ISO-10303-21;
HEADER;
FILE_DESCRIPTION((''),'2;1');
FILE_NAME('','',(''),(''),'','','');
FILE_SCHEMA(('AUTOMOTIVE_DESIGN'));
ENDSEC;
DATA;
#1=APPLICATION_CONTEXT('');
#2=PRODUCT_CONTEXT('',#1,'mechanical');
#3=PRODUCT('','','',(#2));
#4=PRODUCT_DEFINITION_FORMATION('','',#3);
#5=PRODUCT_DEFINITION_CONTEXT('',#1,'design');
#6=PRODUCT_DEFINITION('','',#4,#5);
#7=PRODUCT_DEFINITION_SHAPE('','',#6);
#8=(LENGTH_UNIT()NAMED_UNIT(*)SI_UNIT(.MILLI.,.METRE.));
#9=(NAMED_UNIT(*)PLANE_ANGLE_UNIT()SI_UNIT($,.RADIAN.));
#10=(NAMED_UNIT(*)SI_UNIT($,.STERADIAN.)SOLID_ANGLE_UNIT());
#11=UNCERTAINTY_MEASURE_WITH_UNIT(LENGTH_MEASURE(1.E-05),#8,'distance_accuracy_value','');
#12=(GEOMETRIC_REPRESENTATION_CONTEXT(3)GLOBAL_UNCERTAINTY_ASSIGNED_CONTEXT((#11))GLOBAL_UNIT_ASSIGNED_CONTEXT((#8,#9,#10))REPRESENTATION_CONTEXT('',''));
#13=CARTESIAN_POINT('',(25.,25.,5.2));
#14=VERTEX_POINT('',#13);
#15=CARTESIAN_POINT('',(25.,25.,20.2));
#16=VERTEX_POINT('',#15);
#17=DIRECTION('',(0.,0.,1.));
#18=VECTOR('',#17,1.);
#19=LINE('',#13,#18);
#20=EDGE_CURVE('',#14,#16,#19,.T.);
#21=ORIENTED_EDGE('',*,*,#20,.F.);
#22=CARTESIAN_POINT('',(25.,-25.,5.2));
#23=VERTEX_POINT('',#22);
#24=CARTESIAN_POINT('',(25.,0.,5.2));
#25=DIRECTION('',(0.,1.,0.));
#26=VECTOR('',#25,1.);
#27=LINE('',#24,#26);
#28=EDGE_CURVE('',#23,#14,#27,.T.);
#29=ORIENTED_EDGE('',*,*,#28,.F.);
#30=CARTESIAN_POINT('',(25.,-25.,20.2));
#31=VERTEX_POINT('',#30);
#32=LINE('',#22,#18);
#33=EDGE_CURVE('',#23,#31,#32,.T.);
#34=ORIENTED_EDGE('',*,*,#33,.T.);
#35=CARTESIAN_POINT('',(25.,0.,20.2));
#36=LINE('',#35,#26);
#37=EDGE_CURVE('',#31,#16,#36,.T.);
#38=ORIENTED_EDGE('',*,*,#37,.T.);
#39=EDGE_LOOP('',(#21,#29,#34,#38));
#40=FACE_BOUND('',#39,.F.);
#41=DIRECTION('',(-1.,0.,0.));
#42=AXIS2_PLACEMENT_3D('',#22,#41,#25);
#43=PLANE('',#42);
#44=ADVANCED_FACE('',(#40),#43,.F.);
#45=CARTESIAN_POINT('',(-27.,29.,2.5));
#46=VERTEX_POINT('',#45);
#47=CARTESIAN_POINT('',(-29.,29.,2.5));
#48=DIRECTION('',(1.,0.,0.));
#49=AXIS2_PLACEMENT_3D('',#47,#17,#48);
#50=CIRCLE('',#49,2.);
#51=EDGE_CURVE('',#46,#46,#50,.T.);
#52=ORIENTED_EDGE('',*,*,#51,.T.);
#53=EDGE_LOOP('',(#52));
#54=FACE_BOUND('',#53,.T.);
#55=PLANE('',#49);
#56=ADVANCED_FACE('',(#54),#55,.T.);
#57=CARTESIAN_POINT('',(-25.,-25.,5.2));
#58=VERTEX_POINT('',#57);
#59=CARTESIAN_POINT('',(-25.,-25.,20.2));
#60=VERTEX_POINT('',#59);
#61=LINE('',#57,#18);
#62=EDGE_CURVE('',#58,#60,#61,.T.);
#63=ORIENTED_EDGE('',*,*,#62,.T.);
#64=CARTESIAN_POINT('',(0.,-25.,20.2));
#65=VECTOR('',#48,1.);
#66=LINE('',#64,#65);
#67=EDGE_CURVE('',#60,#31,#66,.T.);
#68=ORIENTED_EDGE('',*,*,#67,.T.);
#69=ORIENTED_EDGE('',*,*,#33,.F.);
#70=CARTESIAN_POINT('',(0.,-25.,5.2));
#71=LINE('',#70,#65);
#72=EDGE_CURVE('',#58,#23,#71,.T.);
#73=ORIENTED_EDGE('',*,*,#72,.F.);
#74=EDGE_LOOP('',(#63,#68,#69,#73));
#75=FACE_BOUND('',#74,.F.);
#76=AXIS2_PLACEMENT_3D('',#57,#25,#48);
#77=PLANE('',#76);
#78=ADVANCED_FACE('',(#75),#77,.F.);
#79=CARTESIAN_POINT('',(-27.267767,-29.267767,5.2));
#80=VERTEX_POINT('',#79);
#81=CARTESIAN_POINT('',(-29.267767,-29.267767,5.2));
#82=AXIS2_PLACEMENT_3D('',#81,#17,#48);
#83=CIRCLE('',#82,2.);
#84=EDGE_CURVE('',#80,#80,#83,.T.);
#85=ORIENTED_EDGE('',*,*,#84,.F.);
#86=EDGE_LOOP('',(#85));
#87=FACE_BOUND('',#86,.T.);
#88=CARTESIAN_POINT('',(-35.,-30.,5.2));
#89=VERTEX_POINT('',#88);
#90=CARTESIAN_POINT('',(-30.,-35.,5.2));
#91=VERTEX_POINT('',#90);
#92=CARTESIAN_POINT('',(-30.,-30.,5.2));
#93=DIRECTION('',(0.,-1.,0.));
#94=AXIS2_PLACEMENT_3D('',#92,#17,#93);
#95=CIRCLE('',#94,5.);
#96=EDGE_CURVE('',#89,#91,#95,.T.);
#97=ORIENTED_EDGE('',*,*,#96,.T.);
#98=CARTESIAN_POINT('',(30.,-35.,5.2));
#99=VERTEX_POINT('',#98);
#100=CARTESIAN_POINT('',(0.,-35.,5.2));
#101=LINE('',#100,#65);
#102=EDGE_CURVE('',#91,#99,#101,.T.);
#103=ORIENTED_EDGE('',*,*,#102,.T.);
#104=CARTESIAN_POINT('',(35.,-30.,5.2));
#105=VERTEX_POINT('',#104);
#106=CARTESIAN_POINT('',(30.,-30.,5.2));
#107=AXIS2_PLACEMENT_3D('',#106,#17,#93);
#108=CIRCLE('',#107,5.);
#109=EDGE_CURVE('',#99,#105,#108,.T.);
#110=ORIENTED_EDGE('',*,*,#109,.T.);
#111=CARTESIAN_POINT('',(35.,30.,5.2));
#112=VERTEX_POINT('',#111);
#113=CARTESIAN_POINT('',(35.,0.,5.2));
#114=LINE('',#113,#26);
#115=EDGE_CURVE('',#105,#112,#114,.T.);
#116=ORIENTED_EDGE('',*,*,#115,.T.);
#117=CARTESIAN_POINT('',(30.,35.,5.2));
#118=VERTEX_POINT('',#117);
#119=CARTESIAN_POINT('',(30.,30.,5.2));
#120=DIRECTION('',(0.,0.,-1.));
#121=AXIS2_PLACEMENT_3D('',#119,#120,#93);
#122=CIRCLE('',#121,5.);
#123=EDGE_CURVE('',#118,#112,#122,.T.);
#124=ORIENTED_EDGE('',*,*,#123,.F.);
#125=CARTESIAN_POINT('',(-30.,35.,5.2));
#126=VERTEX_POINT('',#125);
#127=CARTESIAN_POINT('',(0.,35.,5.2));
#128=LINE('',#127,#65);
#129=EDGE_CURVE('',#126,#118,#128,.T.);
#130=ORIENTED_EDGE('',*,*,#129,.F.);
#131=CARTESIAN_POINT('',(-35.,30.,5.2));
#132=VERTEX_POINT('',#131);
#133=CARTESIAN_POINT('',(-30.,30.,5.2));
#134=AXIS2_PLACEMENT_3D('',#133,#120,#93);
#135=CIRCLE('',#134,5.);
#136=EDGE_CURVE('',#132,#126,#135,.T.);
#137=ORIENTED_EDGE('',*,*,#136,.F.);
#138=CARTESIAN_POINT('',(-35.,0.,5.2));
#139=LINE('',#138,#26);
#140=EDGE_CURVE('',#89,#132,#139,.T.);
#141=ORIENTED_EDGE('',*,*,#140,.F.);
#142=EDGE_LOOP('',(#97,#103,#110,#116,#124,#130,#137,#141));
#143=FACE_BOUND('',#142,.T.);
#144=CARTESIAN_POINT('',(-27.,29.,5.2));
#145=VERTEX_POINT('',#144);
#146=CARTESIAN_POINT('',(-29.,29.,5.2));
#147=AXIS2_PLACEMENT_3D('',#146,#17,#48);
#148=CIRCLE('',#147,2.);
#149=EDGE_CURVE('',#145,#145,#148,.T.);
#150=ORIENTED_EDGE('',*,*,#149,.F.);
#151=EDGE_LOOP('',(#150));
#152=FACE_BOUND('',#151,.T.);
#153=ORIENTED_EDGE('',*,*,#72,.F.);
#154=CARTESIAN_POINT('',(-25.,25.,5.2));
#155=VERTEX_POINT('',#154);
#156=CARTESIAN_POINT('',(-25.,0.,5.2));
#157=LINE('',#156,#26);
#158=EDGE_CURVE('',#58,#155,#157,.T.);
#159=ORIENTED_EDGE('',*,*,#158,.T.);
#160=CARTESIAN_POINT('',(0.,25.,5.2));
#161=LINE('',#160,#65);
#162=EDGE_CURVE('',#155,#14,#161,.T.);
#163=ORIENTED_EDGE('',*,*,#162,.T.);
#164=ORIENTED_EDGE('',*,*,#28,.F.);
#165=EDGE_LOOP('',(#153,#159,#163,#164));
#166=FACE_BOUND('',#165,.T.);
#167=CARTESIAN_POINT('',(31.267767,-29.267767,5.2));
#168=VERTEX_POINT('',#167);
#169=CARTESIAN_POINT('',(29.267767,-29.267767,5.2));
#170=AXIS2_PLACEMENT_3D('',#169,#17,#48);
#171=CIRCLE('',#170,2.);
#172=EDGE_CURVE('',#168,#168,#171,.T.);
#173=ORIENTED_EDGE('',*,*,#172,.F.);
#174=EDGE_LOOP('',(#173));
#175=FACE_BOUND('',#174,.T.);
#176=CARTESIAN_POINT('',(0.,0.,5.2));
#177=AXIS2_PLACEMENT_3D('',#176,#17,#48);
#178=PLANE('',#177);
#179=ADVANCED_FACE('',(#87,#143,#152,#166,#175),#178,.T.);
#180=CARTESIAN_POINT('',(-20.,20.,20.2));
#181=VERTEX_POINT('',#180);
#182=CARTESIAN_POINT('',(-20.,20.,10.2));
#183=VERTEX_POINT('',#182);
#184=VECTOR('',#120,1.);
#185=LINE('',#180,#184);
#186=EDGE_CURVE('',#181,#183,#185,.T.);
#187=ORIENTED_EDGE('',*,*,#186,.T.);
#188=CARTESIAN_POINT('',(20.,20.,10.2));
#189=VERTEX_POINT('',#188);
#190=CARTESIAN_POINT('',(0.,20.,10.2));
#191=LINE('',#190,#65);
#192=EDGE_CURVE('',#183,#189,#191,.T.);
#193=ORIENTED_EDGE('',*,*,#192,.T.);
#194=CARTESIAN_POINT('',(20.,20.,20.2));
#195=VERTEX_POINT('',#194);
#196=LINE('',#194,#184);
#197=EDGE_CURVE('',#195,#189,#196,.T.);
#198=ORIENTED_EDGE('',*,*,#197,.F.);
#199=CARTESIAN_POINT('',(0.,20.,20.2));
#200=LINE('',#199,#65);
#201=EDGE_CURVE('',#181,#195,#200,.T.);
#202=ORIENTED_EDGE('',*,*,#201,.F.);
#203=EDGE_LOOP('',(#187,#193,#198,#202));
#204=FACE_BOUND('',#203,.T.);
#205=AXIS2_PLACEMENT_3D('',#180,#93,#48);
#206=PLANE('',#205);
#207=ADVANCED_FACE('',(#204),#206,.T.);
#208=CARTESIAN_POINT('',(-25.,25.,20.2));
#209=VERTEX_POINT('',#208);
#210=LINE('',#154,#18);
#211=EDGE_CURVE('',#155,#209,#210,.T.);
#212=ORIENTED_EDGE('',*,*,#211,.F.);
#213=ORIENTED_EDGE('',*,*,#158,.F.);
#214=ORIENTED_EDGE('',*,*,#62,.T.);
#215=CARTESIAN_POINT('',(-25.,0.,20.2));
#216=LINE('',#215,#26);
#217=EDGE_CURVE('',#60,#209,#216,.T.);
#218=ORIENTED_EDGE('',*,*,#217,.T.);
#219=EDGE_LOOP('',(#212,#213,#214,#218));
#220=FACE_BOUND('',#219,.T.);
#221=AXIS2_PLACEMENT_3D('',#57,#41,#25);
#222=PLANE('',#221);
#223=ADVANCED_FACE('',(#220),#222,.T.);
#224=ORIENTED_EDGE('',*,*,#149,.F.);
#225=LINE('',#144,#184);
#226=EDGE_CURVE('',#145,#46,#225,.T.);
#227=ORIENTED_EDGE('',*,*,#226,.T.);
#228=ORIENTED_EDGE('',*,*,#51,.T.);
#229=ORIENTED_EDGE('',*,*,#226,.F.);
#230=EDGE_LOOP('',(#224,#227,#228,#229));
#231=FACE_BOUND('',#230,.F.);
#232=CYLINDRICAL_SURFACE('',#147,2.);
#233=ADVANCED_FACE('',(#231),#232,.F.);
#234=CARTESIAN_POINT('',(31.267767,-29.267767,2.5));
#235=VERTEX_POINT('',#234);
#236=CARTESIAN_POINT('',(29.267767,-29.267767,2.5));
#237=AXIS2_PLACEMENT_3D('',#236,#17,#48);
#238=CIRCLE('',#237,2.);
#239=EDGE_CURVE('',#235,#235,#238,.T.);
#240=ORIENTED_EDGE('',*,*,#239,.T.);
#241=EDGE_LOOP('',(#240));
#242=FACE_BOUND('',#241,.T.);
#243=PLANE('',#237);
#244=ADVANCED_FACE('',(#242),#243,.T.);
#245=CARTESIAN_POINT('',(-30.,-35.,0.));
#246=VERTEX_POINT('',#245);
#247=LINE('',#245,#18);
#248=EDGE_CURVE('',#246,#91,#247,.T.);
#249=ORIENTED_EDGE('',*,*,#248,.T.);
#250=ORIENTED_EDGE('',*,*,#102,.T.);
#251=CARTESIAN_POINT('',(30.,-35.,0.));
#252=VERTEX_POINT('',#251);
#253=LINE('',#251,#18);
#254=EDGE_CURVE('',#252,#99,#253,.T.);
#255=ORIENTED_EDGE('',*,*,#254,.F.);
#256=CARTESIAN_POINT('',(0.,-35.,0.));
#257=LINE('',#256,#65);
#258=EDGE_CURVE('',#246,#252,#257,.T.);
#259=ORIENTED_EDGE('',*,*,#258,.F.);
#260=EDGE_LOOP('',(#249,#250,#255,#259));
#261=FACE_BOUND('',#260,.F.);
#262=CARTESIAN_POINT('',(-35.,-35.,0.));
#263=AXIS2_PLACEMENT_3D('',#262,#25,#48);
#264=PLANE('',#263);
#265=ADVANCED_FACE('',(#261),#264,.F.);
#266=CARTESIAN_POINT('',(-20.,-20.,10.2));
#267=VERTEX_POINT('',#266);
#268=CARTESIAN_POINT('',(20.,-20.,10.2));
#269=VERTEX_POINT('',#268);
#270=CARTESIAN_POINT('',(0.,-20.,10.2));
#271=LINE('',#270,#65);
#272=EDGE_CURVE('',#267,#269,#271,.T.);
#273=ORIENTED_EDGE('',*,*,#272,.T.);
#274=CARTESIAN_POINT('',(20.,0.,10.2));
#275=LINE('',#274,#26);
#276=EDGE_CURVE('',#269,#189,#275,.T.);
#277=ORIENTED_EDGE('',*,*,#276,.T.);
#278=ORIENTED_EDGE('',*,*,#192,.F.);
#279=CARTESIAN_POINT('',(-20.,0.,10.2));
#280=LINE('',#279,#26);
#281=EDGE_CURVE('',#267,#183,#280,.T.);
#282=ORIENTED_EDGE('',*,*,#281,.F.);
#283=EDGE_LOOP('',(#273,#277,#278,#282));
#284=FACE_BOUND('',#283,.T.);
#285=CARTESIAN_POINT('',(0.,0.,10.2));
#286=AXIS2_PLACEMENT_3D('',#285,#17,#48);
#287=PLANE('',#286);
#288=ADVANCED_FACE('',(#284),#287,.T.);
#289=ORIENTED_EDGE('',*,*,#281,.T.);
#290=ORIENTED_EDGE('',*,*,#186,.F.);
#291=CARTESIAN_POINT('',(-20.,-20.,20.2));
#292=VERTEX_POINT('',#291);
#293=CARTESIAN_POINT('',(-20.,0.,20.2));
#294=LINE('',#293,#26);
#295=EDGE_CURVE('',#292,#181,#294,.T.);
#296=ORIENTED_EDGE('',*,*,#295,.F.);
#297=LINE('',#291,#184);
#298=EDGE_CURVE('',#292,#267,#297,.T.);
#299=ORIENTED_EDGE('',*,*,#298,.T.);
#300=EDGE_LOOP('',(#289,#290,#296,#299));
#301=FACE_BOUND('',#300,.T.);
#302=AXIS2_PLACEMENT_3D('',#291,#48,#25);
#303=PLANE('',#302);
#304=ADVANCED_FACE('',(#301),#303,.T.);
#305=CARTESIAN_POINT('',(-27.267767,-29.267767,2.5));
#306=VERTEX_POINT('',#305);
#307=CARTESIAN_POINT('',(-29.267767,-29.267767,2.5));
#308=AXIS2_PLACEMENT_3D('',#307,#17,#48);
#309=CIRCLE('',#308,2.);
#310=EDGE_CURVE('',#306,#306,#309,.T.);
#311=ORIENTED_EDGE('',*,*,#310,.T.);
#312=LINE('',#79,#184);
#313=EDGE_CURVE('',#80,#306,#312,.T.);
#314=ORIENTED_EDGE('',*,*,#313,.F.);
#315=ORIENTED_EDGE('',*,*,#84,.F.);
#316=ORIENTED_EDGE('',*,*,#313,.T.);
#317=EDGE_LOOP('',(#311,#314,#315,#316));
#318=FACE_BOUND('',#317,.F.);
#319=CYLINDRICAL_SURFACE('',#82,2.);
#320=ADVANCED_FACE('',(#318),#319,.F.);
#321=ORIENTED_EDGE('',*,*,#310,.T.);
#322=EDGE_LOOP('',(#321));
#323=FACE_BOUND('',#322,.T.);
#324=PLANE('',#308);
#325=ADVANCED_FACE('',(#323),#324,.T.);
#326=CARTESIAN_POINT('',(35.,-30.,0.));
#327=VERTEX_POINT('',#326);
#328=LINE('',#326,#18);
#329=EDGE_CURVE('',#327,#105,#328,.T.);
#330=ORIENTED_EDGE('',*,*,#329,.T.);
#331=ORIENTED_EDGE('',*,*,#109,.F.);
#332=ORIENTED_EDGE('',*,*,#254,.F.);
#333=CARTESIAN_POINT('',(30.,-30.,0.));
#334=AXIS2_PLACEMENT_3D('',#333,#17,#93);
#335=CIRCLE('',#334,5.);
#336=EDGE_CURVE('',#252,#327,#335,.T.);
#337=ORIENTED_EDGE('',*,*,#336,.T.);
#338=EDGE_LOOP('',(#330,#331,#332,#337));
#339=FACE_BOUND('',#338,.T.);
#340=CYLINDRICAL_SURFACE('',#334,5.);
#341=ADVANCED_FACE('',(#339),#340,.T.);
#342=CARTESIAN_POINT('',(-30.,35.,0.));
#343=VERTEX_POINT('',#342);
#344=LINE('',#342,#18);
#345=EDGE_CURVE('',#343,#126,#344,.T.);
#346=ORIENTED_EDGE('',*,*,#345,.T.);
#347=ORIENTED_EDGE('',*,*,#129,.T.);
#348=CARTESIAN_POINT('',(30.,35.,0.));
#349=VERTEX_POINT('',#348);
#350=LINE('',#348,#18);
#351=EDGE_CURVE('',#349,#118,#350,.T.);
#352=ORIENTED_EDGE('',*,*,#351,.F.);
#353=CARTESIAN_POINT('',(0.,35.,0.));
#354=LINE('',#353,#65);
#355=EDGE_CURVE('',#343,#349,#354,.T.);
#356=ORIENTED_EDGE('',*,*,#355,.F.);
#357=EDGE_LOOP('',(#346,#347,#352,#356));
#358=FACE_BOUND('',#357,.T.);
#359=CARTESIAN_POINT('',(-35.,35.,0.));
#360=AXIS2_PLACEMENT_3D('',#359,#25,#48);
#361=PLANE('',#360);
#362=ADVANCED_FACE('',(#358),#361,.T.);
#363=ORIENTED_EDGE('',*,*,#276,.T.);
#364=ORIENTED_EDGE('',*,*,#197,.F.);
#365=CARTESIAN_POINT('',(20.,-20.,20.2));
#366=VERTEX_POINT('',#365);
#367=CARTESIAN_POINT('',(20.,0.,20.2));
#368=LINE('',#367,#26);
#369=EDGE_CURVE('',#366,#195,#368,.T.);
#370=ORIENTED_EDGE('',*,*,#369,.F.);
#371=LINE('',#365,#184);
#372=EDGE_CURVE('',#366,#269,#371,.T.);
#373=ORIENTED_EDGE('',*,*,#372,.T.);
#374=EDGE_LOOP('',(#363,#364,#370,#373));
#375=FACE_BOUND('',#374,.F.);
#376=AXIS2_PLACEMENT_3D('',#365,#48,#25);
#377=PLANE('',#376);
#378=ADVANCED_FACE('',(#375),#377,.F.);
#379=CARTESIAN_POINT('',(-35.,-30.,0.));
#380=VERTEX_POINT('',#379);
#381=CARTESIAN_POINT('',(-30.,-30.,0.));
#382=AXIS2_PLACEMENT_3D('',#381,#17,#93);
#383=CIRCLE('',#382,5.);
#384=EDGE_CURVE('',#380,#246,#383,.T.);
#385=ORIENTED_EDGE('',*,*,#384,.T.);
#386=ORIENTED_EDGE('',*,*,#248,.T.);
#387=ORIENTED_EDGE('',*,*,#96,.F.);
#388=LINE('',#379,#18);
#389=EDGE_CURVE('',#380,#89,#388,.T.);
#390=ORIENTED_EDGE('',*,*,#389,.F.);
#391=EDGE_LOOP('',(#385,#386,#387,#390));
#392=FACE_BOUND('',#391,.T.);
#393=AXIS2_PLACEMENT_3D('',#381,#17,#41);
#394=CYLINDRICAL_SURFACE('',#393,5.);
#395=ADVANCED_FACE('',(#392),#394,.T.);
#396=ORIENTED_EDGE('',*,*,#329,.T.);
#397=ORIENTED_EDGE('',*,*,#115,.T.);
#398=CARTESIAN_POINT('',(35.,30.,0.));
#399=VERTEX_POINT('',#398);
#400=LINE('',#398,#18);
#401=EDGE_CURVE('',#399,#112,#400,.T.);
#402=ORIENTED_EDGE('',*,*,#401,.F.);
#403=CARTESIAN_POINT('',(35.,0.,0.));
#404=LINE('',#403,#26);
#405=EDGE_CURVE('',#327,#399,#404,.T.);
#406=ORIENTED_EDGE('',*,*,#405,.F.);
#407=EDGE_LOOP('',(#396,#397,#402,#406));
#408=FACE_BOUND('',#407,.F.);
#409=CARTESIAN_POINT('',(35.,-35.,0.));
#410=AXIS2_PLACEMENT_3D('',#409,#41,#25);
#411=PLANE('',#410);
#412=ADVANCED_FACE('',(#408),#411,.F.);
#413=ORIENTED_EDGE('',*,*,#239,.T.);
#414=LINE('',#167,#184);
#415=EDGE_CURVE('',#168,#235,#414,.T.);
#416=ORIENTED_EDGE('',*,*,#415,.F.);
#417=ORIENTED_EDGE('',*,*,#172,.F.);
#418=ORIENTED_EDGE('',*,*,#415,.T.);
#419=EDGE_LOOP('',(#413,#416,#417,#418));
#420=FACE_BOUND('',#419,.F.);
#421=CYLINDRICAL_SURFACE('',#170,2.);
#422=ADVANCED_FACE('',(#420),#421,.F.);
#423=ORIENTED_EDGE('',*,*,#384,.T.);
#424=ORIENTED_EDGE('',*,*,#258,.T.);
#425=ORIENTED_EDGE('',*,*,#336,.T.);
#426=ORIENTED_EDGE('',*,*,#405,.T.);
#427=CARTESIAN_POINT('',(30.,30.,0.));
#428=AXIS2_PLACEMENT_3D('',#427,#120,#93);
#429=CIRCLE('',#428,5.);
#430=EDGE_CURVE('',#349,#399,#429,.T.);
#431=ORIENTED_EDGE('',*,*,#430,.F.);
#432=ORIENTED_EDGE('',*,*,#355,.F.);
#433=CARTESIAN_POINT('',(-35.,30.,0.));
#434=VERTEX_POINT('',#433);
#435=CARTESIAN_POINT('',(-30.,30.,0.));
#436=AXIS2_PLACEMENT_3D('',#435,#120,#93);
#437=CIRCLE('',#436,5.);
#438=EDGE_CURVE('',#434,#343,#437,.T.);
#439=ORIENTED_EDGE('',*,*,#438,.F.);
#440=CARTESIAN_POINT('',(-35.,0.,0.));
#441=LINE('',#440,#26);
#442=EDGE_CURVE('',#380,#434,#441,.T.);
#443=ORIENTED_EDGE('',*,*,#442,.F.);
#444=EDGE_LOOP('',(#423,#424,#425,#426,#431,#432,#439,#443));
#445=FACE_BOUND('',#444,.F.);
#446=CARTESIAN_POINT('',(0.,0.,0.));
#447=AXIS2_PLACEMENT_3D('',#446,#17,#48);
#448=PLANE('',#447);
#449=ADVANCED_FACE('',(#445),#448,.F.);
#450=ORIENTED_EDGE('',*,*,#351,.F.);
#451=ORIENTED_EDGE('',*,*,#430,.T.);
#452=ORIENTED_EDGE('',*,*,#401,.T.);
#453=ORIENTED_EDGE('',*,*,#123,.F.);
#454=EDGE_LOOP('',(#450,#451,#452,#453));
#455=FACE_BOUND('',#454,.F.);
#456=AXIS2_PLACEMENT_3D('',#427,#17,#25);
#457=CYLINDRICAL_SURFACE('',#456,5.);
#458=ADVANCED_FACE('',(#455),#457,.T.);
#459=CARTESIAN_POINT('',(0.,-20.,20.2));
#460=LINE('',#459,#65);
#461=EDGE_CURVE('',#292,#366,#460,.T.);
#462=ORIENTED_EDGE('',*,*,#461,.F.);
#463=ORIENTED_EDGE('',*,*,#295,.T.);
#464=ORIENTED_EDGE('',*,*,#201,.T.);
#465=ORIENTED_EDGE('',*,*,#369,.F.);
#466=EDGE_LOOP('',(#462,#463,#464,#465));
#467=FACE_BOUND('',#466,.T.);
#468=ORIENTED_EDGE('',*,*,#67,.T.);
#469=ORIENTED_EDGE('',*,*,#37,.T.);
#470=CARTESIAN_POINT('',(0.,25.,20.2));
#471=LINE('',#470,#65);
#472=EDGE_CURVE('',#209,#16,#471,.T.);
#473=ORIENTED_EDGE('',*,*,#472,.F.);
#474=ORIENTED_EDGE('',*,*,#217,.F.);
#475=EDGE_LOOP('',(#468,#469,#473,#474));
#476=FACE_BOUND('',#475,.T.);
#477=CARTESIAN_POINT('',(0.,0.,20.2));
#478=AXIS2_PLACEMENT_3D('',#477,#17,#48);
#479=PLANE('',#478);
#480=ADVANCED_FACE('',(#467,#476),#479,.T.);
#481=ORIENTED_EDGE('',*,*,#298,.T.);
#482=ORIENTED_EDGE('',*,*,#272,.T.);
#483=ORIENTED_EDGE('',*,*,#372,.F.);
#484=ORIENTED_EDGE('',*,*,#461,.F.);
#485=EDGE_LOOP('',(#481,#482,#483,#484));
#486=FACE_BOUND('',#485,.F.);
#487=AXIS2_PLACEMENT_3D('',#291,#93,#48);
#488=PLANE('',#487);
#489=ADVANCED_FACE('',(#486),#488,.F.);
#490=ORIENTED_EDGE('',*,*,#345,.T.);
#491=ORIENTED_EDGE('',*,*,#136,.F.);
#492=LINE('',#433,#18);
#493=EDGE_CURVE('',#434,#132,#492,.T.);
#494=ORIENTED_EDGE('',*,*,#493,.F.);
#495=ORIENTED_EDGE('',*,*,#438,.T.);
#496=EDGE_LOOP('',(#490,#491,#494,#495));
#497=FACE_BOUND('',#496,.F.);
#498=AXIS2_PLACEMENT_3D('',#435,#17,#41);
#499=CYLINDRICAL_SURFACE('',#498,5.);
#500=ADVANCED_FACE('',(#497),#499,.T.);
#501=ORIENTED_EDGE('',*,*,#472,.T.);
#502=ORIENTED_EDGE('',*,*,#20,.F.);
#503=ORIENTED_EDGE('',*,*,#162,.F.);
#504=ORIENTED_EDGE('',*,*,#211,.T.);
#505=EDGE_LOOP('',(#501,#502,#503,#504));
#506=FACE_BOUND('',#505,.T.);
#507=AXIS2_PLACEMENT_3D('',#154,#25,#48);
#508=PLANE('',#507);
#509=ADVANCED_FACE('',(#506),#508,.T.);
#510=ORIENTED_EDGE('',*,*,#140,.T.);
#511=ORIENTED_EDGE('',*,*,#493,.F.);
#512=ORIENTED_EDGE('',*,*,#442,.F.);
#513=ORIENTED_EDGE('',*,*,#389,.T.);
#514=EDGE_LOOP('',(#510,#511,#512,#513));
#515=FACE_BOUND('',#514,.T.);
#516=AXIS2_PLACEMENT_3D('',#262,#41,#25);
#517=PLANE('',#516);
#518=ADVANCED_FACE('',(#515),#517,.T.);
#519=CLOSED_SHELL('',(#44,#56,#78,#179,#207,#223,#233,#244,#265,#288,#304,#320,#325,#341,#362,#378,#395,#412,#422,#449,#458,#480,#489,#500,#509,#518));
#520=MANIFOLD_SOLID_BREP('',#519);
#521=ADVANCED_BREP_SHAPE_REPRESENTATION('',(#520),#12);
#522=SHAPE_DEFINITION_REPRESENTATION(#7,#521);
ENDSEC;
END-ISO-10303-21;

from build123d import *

# Parameters (mm, degrees)
F0_W     = 70
F0_H     = 70
F1_DEPTH = 5.2
F2_W     = 50
F2_H     = 50
F3_DEPTH = 15
F4_R     = 5
F5_R     = 2
F6_DEPTH = 2.7
F8_W     = 40
F8_H     = 40
F9_DEPTH = 10


# Not quite as in the source:
# - a feature names something its author has since deleted; it is built from what else it names


with BuildPart() as f1:
    # F0 (on Top) → F1 (new body)
    with BuildSketch(Plane.XY):
        Rectangle(F0_W, F0_H)
    extrude(amount=F1_DEPTH)

    # F2 (on face) → F3 (join)
    with BuildSketch(Plane.XY.offset(5.2)):
        Rectangle(F2_W, F2_H)
    extrude(amount=F3_DEPTH)

    # F4
    f4_edges = [f1.edges().sort_by_distance(p)[0] for p in [
        (-35, 35, 2.6),
        (35, 35, 2.6),
        (35, -35, 2.6),
        (-35, -35, 2.6),
    ]]
    fillet(f4_edges, radius=F4_R)

    # F5 (on face) → F6 (cut)
    with BuildSketch(Plane.XY.offset(5.2)):
        with Locations((-29, 29)):
            Circle(F5_R)
        with Locations((29.267766953, -29.267766953)):
            Circle(F5_R)
        with Locations((-29.267766953, -29.267766953)):
            Circle(F5_R)
    extrude(amount=-F6_DEPTH, mode=Mode.SUBTRACT)

    # F8 (on face) → F9 (cut)
    with BuildSketch(Plane.XY.offset(20.2)):
        Rectangle(F8_W, F8_H)
    extrude(amount=-F9_DEPTH, mode=Mode.SUBTRACT)


solid = f1.part
